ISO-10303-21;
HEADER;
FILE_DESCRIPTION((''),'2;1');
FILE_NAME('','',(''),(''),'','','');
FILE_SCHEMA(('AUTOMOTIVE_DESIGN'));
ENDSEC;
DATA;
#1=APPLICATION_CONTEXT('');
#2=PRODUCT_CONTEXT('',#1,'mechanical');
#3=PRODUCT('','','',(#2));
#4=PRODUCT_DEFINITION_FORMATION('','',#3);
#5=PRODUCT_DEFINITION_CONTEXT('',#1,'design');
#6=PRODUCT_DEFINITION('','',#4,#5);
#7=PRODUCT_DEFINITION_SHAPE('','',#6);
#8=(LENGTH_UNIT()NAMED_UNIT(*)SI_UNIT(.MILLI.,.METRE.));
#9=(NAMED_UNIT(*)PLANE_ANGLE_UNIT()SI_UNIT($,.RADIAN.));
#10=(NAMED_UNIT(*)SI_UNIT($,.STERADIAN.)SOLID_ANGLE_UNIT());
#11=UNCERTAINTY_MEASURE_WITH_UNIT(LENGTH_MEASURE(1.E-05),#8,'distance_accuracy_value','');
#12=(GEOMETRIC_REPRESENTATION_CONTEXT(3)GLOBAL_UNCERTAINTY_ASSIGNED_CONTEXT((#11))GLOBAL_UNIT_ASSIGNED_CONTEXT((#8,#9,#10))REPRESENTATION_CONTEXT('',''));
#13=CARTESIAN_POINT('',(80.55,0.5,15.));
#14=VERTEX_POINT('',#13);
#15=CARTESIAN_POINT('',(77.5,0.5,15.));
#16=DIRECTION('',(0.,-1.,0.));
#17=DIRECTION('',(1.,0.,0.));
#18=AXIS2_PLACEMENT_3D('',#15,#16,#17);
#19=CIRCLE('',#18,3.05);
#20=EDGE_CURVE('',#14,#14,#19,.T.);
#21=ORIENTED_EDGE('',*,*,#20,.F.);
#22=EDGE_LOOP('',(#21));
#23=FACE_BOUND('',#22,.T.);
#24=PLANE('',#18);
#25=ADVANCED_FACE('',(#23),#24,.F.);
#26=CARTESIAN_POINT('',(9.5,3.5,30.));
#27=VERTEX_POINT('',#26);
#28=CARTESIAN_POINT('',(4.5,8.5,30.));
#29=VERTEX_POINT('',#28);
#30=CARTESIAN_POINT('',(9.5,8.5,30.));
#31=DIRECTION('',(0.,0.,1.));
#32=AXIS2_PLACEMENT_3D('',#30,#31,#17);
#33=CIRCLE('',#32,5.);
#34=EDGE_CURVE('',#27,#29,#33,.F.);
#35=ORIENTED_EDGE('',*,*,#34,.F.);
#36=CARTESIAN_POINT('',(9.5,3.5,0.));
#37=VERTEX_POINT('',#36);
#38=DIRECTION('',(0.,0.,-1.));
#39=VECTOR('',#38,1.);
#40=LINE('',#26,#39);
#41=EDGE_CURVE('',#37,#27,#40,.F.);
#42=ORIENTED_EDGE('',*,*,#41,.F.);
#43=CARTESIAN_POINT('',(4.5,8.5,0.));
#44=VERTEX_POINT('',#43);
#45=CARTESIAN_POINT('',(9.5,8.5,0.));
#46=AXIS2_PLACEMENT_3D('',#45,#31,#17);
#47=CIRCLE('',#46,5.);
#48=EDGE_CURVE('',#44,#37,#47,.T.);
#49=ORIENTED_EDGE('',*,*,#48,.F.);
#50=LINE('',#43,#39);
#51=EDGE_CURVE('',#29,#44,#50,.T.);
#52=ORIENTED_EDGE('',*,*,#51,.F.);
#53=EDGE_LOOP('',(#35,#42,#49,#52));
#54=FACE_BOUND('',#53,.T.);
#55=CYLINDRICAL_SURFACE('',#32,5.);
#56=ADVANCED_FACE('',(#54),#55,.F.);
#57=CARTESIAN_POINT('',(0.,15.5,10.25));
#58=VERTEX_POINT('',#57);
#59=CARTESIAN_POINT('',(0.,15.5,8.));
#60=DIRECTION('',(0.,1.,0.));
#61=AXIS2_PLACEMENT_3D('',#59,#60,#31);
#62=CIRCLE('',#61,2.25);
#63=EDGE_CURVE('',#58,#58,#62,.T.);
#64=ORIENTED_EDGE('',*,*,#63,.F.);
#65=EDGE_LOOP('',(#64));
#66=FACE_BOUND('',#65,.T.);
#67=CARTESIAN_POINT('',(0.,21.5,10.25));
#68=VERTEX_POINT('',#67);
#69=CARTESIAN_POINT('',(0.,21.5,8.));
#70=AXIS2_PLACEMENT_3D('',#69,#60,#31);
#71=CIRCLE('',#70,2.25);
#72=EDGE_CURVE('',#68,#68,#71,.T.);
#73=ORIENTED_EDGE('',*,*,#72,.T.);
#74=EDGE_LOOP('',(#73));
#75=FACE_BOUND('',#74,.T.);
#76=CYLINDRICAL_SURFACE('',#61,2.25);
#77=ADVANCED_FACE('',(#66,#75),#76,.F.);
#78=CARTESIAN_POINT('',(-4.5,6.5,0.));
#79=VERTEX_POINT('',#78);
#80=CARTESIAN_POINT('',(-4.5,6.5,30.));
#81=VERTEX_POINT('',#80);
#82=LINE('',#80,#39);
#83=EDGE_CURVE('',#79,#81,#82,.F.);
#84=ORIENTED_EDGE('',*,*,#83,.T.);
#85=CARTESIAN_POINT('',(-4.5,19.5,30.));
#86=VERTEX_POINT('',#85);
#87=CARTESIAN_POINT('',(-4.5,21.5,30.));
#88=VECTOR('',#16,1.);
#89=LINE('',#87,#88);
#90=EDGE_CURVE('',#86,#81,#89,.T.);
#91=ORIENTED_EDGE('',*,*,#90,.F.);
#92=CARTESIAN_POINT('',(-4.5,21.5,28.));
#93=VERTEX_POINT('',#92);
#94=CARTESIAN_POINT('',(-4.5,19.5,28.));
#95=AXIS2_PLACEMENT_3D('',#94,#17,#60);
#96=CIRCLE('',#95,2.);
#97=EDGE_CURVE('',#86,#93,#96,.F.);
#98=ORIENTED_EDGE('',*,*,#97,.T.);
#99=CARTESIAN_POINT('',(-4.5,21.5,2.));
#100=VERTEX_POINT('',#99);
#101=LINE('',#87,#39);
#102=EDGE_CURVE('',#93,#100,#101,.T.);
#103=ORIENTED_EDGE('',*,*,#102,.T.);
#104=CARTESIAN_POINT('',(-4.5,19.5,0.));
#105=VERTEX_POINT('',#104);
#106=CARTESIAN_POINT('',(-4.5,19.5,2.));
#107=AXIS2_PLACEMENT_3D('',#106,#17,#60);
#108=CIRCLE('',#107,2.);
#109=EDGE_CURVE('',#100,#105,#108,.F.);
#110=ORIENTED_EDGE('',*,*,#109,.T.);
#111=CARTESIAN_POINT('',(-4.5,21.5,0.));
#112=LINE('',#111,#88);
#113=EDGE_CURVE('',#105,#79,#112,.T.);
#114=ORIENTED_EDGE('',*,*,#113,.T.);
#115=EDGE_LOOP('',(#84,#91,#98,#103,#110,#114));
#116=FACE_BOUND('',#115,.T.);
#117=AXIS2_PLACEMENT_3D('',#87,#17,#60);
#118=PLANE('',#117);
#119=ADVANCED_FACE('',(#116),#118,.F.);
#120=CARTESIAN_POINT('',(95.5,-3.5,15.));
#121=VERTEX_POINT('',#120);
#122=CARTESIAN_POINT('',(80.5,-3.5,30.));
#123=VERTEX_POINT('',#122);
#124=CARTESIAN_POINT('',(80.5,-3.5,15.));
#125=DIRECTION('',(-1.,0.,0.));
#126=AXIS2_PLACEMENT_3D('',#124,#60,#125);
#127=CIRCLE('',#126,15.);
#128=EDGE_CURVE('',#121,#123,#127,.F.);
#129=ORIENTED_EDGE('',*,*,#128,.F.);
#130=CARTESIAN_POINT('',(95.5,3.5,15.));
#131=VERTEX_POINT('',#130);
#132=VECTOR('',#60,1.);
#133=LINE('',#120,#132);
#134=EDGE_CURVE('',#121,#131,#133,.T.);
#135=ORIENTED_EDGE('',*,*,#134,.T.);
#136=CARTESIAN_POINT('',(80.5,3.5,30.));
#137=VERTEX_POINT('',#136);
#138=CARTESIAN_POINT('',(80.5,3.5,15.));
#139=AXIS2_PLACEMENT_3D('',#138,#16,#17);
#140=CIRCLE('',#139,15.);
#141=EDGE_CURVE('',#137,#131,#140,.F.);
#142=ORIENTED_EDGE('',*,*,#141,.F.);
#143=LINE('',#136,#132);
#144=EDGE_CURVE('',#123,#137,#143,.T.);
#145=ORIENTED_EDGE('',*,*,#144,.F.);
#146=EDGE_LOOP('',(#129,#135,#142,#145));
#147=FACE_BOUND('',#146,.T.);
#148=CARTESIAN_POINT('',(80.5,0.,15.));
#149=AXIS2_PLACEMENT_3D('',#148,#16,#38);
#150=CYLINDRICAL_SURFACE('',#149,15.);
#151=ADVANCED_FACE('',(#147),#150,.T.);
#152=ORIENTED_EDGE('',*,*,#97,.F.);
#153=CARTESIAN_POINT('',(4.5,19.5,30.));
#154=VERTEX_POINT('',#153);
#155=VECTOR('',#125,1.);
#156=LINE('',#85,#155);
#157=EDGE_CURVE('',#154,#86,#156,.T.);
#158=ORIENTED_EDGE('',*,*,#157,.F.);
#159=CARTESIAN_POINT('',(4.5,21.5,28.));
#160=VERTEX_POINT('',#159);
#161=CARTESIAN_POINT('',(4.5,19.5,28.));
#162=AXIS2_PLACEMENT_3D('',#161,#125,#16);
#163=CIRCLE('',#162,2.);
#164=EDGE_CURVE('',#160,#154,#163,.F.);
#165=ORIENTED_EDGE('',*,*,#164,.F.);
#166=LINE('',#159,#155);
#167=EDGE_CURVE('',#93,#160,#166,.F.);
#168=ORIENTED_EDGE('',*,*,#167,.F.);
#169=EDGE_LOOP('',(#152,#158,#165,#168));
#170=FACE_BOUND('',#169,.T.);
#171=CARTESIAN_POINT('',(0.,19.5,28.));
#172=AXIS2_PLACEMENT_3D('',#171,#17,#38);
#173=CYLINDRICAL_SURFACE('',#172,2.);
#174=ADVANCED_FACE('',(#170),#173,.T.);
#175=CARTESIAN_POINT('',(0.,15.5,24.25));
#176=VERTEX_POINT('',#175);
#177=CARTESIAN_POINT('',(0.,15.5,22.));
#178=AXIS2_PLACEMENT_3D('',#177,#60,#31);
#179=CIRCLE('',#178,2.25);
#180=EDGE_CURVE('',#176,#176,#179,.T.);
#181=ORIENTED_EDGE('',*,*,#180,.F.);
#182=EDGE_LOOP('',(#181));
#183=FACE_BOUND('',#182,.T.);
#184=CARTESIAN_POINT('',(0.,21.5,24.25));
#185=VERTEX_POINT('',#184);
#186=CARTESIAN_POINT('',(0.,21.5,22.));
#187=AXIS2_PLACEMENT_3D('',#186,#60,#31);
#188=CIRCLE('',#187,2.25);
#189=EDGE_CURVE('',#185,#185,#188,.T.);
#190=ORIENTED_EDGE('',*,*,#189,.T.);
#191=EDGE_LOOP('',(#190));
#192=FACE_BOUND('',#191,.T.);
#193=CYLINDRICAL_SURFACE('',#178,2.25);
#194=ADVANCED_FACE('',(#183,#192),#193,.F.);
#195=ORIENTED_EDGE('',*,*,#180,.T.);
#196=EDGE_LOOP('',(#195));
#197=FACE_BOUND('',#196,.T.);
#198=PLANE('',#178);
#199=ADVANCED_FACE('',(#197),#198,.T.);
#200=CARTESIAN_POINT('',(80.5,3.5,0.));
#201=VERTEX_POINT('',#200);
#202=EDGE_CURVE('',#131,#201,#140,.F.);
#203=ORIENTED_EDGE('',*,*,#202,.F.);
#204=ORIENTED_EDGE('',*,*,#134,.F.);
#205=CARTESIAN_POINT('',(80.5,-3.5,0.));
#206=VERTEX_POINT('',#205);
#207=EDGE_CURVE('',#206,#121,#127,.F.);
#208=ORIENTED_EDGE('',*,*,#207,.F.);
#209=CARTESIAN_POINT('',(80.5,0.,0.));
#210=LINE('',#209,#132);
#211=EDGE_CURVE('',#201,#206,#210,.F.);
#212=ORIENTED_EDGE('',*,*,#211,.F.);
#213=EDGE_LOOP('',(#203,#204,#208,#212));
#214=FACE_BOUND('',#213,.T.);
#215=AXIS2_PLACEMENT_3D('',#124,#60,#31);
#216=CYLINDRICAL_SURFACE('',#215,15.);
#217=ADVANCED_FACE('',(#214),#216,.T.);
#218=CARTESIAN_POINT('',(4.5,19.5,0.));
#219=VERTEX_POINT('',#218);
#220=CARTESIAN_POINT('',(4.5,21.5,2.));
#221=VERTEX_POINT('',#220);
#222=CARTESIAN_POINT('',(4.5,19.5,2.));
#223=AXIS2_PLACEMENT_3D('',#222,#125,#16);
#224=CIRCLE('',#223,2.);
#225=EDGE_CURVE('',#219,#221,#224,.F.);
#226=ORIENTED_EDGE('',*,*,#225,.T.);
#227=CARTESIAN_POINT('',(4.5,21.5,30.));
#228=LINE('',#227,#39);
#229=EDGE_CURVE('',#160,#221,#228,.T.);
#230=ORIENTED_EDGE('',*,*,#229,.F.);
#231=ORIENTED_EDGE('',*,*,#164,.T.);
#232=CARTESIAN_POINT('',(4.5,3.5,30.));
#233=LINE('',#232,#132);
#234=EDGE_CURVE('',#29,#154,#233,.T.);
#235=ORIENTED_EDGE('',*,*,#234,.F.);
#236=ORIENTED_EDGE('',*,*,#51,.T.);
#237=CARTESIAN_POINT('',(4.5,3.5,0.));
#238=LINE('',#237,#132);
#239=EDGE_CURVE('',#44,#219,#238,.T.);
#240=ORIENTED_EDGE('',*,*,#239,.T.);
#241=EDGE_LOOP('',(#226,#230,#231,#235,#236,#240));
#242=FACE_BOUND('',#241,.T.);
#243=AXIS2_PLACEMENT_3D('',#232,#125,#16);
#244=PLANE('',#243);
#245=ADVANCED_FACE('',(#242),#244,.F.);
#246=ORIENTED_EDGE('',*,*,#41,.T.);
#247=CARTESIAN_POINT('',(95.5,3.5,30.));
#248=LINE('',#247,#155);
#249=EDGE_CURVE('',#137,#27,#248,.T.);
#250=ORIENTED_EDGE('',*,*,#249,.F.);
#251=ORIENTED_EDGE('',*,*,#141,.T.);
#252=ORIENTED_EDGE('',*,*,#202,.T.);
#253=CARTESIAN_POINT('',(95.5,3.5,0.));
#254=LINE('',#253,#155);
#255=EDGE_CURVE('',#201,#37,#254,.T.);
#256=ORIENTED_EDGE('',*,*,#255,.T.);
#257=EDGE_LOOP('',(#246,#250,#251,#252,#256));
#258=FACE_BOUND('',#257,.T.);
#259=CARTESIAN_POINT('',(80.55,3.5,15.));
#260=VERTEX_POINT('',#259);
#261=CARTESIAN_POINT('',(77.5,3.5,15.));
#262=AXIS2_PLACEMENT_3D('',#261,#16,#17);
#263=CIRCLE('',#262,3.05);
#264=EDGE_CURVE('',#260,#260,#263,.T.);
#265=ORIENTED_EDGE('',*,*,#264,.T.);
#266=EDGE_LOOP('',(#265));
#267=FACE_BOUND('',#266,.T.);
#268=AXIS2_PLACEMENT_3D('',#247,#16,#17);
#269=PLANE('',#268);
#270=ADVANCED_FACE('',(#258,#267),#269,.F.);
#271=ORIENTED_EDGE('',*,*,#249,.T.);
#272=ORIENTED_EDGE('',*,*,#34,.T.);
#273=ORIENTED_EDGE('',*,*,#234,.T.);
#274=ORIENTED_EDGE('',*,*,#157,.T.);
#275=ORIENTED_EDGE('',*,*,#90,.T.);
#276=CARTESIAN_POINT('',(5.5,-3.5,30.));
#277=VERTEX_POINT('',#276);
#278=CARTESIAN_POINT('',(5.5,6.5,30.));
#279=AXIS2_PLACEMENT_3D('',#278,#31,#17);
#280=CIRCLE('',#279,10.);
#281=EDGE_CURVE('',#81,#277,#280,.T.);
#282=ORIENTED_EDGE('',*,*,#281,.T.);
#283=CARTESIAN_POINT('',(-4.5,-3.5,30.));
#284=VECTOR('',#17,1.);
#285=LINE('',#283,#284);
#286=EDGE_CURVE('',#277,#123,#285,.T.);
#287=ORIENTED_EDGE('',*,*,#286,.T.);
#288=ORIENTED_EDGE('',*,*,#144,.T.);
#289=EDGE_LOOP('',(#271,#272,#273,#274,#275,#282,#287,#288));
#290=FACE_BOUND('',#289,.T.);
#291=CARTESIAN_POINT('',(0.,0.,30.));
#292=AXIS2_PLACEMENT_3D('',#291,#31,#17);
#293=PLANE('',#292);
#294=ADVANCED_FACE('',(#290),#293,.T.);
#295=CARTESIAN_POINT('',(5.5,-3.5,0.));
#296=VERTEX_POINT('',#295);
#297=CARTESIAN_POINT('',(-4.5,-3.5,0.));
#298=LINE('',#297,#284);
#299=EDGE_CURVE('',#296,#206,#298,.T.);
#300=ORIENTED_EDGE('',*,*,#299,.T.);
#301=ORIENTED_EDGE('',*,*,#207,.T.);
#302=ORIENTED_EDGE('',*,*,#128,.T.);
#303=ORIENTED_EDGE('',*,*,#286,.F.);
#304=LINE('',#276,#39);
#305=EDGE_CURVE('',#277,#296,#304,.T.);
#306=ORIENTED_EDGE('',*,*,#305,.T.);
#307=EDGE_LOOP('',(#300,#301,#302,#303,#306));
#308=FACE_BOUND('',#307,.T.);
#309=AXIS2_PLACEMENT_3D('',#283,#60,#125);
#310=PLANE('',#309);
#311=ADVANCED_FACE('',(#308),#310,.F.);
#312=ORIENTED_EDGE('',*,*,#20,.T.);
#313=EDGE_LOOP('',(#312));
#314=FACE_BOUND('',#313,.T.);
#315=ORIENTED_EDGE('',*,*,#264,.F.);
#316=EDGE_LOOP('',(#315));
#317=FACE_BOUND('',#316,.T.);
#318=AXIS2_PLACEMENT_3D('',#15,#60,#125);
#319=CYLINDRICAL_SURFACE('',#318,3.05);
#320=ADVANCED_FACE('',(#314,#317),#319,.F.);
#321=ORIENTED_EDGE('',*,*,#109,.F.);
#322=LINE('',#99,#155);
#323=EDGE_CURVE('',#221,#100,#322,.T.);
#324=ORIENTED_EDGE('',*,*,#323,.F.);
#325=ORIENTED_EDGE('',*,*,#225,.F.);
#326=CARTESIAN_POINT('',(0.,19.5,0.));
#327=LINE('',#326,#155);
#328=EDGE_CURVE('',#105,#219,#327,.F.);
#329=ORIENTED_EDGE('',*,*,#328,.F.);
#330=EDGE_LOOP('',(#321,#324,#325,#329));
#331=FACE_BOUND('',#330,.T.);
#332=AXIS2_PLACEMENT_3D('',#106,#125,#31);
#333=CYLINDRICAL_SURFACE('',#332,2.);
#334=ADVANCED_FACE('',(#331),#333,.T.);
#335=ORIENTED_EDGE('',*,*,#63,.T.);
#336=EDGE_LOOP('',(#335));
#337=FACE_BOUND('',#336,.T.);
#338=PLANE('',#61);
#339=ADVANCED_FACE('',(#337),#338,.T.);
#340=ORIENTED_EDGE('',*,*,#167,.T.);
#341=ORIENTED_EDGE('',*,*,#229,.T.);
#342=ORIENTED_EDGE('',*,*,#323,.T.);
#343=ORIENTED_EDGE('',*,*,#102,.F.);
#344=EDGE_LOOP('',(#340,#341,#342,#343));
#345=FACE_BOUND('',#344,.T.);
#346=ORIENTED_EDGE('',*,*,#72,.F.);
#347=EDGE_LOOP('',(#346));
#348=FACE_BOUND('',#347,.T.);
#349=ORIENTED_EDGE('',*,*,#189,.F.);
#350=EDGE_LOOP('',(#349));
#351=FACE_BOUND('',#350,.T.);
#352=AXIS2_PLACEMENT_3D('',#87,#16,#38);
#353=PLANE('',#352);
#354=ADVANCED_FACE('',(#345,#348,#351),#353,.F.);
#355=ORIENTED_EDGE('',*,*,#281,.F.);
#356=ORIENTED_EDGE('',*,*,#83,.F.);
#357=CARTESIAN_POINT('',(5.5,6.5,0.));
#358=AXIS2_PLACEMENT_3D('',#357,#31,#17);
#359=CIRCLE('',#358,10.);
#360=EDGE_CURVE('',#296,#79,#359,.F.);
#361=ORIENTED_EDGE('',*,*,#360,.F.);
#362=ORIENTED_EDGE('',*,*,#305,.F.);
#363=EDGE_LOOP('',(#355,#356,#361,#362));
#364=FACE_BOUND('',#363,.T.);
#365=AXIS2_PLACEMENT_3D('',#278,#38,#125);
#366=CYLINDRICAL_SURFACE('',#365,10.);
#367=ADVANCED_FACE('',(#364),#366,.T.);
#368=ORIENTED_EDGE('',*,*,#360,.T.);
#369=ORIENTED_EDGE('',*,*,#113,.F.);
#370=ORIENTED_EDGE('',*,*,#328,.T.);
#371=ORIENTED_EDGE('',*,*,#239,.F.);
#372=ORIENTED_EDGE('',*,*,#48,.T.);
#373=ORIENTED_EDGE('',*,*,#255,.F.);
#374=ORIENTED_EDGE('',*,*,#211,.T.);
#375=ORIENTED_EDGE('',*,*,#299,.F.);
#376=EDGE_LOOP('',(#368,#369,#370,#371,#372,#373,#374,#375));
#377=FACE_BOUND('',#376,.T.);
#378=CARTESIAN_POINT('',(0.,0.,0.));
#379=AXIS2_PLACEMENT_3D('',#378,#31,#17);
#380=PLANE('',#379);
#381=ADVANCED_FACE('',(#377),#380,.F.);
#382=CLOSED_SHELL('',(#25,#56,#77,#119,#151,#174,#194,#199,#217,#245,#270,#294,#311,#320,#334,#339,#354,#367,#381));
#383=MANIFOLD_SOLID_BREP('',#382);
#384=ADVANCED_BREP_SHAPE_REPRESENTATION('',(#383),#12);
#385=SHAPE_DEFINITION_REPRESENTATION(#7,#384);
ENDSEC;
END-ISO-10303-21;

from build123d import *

# Parameters (mm, degrees)
BOSS_EXTRUDE1_DEPTH = 30
SKETCH2_R           = 2.25
CUT_EXTRUDE1_DEPTH  = 6
FILLET1_R           = 5
FILLET2_R           = 10
SKETCH3_R           = 3.05
CUT_EXTRUDE3_DEPTH  = 3
FILLET3_R           = 15
FILLET4_R           = 2


with BuildPart() as part:
    # Sketch1 → Boss-Extrude1 (new body)
    with BuildSketch(Plane.XY):
        Polygon((-4.5, 21.5), (4.5, 21.5), (4.5, 3.5), (95.5, 3.5), (95.5, -3.5), (-4.5, -3.5), align=None)
    extrude(amount=BOSS_EXTRUDE1_DEPTH)

    # Sketch2 → Cut-Extrude1 (cut)
    with BuildSketch(Plane(origin=(0, 21.5, 0), x_dir=(1, 0, 0), z_dir=(0, 1, 0))):
        with Locations(Location((0, -22, 0), (0, 0, 270))):
            Circle(SKETCH2_R)
        with Locations(Location((0, -8, 0), (0, 0, 270))):
            Circle(SKETCH2_R)
    extrude(amount=-CUT_EXTRUDE1_DEPTH, mode=Mode.SUBTRACT)

    # Fillet1
    fillet1_edges = [part.edges().sort_by_distance(p)[0] for p in [
        (4.5, 3.5, 15),
    ]]
    fillet(fillet1_edges, radius=FILLET1_R)

    # Fillet2
    fillet2_edges = [part.edges().sort_by_distance(p)[0] for p in [
        (-4.5, -3.5, 15),
    ]]
    fillet(fillet2_edges, radius=FILLET2_R)

    # Sketch3 → Cut-Extrude3 (cut)
    with BuildSketch(Plane.XZ.offset(-3.5)):
        with Locations((77.5, 15)):
            Circle(SKETCH3_R)
    extrude(amount=CUT_EXTRUDE3_DEPTH, mode=Mode.SUBTRACT)

    # Fillet3
    fillet3_edges = [part.edges().sort_by_distance(p)[0] for p in [
        (95.5, 0, 30),
        (95.5, 0, 0),
    ]]
    fillet(fillet3_edges, radius=FILLET3_R - 0.0001)  # a hair under: the kernel refuses the full size

    # Fillet4
    fillet4_edges = [part.edges().sort_by_distance(p)[0] for p in [
        (0, 21.5, 30),
        (0, 21.5, 0),
    ]]
    fillet(fillet4_edges, radius=FILLET4_R)


solid = part.part
